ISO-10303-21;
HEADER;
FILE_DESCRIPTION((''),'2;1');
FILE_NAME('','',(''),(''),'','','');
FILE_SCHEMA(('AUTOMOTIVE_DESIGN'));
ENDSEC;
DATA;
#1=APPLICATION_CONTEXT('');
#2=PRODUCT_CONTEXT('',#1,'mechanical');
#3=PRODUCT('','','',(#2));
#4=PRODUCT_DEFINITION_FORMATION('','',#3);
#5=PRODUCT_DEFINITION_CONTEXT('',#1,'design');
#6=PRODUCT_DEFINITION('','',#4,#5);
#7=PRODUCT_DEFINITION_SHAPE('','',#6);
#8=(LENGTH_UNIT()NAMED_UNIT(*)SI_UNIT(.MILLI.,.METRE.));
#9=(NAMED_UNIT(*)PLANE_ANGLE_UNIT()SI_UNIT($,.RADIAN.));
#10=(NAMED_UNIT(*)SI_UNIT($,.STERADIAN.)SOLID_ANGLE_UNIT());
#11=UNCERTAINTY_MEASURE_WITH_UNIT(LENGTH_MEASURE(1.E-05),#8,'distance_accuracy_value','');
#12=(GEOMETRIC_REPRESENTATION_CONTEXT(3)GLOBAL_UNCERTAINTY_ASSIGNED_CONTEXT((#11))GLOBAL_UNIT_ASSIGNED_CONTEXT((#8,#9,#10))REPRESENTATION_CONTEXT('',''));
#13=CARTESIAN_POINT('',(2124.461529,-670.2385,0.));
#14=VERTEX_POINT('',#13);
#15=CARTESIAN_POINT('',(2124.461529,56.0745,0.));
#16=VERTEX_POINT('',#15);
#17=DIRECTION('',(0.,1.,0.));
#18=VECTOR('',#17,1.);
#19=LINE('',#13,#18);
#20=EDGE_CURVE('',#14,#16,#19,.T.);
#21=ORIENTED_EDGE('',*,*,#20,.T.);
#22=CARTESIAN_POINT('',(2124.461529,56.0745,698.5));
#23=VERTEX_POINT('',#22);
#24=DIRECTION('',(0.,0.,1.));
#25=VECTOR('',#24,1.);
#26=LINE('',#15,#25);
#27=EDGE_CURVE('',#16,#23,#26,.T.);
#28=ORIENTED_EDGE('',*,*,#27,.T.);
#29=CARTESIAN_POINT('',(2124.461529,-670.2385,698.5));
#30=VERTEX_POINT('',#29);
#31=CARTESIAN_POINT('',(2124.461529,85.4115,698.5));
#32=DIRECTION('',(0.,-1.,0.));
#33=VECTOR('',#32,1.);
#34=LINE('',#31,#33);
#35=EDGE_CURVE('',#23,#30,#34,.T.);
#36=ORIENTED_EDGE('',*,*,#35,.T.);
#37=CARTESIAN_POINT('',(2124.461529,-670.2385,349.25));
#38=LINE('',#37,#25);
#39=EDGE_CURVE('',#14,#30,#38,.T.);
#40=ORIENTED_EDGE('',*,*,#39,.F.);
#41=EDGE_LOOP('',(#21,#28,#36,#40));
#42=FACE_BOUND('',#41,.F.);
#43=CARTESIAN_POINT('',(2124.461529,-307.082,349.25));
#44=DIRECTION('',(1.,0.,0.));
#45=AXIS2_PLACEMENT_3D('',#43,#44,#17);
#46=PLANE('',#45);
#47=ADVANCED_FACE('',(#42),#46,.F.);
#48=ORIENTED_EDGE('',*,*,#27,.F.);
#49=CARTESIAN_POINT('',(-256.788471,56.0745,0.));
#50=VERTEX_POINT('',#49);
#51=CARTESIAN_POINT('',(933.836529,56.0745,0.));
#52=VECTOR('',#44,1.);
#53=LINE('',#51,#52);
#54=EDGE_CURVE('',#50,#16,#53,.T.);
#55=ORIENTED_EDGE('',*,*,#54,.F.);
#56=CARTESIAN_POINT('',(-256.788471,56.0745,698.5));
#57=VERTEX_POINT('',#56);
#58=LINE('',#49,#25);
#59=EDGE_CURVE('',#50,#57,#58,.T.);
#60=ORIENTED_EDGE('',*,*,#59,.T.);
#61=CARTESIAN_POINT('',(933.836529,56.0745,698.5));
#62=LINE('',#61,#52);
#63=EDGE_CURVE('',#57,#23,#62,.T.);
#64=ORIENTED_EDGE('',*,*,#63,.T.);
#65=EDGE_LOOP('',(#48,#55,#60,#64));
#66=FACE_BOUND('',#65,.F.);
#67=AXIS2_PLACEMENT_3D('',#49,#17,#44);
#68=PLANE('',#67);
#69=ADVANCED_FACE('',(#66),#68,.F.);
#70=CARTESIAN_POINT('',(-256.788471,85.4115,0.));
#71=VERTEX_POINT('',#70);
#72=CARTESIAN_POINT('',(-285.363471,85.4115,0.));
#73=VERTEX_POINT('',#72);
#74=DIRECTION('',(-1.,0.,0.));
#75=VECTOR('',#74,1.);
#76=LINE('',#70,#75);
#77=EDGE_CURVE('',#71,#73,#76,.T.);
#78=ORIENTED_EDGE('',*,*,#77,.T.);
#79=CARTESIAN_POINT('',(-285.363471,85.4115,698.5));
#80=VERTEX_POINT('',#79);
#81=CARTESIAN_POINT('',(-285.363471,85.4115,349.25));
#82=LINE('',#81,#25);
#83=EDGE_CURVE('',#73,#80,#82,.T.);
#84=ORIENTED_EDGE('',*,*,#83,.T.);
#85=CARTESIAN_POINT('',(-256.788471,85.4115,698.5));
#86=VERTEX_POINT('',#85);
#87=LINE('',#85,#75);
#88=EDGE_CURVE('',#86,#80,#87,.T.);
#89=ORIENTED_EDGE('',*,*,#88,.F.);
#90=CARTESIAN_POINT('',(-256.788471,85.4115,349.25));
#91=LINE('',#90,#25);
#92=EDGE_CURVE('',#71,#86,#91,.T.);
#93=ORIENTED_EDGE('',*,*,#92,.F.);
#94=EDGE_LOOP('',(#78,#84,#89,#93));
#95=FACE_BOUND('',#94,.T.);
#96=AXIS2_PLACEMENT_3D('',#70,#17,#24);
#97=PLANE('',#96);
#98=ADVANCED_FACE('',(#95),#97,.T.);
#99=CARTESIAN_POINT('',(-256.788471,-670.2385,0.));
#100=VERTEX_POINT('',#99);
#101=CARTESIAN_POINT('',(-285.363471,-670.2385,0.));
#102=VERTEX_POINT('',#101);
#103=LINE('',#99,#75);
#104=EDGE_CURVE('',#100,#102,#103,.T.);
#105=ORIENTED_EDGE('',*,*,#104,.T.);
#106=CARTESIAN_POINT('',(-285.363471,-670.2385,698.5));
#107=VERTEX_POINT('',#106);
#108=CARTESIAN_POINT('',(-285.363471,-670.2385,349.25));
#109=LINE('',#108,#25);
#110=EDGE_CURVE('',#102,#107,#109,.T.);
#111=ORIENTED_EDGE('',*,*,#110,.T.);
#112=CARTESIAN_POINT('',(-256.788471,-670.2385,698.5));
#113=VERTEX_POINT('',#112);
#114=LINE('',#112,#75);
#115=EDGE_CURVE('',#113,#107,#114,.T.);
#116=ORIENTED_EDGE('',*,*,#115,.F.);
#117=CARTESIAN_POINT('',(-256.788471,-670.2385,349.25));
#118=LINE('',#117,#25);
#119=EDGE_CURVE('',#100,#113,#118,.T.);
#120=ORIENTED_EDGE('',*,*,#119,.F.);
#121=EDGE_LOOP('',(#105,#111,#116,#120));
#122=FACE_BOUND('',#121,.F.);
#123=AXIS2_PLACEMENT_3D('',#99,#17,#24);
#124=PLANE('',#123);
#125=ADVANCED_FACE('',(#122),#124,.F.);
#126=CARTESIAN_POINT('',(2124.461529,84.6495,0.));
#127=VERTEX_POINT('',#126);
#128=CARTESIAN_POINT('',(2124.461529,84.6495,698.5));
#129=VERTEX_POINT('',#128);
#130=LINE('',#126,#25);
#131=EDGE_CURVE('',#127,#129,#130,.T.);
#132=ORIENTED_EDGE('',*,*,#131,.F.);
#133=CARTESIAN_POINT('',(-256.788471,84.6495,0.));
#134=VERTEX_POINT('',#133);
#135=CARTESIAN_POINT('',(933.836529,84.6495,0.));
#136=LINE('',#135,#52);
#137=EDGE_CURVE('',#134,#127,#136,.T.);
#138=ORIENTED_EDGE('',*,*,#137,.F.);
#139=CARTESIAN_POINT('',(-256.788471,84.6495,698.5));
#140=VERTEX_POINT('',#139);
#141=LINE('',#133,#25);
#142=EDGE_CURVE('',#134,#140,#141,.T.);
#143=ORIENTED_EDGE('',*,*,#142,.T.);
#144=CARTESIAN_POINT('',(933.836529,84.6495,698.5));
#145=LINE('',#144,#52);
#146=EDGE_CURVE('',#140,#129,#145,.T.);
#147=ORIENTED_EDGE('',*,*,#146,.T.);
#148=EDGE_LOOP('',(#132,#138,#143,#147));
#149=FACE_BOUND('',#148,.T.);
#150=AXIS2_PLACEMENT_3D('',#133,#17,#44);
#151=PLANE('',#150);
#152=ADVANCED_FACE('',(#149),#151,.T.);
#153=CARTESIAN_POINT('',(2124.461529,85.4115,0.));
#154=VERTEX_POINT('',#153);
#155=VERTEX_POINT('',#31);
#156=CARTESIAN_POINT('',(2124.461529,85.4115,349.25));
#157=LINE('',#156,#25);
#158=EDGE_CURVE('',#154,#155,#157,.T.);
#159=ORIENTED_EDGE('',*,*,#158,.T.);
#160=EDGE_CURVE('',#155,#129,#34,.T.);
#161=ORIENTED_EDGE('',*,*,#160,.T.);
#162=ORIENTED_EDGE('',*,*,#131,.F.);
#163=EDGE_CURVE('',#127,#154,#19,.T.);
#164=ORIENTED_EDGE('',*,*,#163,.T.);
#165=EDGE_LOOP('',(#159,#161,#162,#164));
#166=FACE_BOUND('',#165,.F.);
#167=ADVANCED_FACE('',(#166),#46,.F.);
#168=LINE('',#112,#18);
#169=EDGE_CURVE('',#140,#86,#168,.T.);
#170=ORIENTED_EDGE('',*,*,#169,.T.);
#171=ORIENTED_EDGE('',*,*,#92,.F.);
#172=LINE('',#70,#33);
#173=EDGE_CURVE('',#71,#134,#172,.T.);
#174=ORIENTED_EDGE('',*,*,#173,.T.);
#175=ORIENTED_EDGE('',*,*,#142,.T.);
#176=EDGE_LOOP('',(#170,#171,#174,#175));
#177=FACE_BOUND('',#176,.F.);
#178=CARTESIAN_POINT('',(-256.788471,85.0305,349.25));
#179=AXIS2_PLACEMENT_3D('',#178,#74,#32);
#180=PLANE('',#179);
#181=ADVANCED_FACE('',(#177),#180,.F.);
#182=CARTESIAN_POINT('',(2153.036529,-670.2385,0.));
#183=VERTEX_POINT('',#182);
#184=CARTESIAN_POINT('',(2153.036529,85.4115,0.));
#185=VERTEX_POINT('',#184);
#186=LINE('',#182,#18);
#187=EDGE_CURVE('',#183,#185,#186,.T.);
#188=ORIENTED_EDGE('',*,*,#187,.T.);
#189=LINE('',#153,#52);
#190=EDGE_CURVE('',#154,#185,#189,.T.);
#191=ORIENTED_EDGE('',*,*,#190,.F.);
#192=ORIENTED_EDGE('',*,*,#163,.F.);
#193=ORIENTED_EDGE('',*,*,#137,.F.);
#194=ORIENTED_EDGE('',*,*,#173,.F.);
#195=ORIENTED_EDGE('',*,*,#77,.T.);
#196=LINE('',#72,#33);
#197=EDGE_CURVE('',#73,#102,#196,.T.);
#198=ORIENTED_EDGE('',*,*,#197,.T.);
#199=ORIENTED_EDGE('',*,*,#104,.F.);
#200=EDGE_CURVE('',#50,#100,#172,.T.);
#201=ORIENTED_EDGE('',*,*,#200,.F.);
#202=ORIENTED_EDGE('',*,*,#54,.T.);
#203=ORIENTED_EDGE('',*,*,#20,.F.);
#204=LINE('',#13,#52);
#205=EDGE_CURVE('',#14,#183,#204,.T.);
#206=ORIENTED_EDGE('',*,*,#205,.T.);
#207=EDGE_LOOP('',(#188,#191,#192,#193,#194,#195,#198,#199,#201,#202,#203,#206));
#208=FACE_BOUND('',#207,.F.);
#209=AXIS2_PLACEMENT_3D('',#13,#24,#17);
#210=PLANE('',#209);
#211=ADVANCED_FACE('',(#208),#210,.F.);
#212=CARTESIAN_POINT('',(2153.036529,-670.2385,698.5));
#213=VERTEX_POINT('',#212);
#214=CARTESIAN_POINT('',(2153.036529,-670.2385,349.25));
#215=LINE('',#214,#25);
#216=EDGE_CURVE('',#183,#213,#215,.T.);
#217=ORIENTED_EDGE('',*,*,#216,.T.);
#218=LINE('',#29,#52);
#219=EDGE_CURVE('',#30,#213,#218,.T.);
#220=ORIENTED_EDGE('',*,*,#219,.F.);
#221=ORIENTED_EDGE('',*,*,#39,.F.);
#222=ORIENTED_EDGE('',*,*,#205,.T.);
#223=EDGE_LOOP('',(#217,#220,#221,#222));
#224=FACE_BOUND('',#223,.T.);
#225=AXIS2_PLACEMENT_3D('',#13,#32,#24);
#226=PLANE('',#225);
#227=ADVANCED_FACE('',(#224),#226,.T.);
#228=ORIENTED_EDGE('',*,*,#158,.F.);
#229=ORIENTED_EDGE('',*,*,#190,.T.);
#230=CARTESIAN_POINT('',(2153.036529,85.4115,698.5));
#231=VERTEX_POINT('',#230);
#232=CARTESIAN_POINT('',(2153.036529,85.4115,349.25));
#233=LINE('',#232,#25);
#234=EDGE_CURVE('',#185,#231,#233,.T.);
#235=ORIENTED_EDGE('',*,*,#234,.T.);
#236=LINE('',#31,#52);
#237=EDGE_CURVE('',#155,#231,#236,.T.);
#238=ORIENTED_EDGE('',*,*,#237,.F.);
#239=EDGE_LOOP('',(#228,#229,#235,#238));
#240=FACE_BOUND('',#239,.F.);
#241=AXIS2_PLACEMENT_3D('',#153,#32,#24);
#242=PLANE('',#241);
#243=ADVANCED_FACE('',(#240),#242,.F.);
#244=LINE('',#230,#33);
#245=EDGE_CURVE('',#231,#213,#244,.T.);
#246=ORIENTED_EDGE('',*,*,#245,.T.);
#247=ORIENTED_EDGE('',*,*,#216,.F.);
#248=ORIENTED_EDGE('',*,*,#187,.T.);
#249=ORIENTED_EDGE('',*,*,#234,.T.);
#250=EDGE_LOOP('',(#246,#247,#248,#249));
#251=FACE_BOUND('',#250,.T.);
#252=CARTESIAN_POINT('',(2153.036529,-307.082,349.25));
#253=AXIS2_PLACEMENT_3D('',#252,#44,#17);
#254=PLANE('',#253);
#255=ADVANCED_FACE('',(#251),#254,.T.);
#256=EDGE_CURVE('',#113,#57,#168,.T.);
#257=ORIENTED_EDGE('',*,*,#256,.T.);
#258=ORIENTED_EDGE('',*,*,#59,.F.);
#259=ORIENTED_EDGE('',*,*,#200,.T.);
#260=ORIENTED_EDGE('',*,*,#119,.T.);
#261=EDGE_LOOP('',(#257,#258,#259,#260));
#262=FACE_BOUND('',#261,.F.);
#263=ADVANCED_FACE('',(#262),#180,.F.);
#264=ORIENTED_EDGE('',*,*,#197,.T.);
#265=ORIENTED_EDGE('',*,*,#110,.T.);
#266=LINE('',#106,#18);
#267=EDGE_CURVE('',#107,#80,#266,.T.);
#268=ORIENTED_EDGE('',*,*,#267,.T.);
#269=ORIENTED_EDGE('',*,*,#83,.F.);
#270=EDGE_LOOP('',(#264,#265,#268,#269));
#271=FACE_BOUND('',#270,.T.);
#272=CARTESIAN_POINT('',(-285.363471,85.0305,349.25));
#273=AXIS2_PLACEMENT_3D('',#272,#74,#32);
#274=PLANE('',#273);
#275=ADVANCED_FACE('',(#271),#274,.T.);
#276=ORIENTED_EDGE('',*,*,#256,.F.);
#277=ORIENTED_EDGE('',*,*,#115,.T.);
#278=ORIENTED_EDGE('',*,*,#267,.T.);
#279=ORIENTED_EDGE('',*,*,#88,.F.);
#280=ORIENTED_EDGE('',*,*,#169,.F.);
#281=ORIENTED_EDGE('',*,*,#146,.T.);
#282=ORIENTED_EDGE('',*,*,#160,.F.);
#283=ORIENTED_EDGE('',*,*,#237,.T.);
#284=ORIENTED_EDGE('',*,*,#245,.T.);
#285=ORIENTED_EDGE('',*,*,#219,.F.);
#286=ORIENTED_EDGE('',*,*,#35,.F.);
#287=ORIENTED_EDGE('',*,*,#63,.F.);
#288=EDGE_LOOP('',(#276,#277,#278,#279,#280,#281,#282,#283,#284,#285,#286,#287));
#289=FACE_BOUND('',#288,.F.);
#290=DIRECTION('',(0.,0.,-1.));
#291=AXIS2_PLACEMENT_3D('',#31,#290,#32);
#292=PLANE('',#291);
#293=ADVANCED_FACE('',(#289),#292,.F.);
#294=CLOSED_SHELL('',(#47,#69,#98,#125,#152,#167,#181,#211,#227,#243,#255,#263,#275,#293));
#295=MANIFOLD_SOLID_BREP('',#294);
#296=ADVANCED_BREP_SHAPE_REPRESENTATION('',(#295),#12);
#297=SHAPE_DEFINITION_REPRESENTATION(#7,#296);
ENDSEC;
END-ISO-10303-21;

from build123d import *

# Parameters (mm, degrees)
F0_W     = 2381.25
F0_H     = 28.575
F1_DEPTH = 698.5
F3_W     = 0.762
F3_H     = 698.5
F3_W_2   = 28.575
F3_W_3   = 726.313
F4_DEPTH = 28.575
F2_W     = 726.313
F2_H     = 698.5
F2_W_2   = 28.575
F2_W_3   = 0.762
F5_DEPTH = 28.575


with BuildPart() as f1:
    # F0 (on Top) → F1 (new body)
    with BuildSketch(Plane.XY):
        with Locations((933.8365292177, 70.3620000839)):
            Rectangle(F0_W, F0_H)
    extrude(amount=F1_DEPTH)

    # F3 (on face) → F4 (join)
    with BuildSketch(Plane(origin=(-256.7884707823, 0, 0), x_dir=(0, -1, 0), z_dir=(-1, 0, 0))):
        with Locations((-85.0305000839, 349.25)):
            Rectangle(F3_W, F3_H)
        with Locations((-70.3620000839, 349.25)):
            Rectangle(F3_W_2, F3_H)
        with Locations((307.0819999161, 349.25)):
            Rectangle(F3_W_3, F3_H)
    extrude(amount=F4_DEPTH)

    # F2 (on face) → F5 (join)
    with BuildSketch(Plane.YZ.offset(2124.4615292177)):
        with Locations((-307.0819999161, 349.25)):
            Rectangle(F2_W, F2_H)
        with Locations((70.3620000839, 349.25)):
            Rectangle(F2_W_2, F2_H)
        with Locations((85.0305000839, 349.25)):
            Rectangle(F2_W_3, F2_H)
    extrude(amount=F5_DEPTH)


solid = f1.part
